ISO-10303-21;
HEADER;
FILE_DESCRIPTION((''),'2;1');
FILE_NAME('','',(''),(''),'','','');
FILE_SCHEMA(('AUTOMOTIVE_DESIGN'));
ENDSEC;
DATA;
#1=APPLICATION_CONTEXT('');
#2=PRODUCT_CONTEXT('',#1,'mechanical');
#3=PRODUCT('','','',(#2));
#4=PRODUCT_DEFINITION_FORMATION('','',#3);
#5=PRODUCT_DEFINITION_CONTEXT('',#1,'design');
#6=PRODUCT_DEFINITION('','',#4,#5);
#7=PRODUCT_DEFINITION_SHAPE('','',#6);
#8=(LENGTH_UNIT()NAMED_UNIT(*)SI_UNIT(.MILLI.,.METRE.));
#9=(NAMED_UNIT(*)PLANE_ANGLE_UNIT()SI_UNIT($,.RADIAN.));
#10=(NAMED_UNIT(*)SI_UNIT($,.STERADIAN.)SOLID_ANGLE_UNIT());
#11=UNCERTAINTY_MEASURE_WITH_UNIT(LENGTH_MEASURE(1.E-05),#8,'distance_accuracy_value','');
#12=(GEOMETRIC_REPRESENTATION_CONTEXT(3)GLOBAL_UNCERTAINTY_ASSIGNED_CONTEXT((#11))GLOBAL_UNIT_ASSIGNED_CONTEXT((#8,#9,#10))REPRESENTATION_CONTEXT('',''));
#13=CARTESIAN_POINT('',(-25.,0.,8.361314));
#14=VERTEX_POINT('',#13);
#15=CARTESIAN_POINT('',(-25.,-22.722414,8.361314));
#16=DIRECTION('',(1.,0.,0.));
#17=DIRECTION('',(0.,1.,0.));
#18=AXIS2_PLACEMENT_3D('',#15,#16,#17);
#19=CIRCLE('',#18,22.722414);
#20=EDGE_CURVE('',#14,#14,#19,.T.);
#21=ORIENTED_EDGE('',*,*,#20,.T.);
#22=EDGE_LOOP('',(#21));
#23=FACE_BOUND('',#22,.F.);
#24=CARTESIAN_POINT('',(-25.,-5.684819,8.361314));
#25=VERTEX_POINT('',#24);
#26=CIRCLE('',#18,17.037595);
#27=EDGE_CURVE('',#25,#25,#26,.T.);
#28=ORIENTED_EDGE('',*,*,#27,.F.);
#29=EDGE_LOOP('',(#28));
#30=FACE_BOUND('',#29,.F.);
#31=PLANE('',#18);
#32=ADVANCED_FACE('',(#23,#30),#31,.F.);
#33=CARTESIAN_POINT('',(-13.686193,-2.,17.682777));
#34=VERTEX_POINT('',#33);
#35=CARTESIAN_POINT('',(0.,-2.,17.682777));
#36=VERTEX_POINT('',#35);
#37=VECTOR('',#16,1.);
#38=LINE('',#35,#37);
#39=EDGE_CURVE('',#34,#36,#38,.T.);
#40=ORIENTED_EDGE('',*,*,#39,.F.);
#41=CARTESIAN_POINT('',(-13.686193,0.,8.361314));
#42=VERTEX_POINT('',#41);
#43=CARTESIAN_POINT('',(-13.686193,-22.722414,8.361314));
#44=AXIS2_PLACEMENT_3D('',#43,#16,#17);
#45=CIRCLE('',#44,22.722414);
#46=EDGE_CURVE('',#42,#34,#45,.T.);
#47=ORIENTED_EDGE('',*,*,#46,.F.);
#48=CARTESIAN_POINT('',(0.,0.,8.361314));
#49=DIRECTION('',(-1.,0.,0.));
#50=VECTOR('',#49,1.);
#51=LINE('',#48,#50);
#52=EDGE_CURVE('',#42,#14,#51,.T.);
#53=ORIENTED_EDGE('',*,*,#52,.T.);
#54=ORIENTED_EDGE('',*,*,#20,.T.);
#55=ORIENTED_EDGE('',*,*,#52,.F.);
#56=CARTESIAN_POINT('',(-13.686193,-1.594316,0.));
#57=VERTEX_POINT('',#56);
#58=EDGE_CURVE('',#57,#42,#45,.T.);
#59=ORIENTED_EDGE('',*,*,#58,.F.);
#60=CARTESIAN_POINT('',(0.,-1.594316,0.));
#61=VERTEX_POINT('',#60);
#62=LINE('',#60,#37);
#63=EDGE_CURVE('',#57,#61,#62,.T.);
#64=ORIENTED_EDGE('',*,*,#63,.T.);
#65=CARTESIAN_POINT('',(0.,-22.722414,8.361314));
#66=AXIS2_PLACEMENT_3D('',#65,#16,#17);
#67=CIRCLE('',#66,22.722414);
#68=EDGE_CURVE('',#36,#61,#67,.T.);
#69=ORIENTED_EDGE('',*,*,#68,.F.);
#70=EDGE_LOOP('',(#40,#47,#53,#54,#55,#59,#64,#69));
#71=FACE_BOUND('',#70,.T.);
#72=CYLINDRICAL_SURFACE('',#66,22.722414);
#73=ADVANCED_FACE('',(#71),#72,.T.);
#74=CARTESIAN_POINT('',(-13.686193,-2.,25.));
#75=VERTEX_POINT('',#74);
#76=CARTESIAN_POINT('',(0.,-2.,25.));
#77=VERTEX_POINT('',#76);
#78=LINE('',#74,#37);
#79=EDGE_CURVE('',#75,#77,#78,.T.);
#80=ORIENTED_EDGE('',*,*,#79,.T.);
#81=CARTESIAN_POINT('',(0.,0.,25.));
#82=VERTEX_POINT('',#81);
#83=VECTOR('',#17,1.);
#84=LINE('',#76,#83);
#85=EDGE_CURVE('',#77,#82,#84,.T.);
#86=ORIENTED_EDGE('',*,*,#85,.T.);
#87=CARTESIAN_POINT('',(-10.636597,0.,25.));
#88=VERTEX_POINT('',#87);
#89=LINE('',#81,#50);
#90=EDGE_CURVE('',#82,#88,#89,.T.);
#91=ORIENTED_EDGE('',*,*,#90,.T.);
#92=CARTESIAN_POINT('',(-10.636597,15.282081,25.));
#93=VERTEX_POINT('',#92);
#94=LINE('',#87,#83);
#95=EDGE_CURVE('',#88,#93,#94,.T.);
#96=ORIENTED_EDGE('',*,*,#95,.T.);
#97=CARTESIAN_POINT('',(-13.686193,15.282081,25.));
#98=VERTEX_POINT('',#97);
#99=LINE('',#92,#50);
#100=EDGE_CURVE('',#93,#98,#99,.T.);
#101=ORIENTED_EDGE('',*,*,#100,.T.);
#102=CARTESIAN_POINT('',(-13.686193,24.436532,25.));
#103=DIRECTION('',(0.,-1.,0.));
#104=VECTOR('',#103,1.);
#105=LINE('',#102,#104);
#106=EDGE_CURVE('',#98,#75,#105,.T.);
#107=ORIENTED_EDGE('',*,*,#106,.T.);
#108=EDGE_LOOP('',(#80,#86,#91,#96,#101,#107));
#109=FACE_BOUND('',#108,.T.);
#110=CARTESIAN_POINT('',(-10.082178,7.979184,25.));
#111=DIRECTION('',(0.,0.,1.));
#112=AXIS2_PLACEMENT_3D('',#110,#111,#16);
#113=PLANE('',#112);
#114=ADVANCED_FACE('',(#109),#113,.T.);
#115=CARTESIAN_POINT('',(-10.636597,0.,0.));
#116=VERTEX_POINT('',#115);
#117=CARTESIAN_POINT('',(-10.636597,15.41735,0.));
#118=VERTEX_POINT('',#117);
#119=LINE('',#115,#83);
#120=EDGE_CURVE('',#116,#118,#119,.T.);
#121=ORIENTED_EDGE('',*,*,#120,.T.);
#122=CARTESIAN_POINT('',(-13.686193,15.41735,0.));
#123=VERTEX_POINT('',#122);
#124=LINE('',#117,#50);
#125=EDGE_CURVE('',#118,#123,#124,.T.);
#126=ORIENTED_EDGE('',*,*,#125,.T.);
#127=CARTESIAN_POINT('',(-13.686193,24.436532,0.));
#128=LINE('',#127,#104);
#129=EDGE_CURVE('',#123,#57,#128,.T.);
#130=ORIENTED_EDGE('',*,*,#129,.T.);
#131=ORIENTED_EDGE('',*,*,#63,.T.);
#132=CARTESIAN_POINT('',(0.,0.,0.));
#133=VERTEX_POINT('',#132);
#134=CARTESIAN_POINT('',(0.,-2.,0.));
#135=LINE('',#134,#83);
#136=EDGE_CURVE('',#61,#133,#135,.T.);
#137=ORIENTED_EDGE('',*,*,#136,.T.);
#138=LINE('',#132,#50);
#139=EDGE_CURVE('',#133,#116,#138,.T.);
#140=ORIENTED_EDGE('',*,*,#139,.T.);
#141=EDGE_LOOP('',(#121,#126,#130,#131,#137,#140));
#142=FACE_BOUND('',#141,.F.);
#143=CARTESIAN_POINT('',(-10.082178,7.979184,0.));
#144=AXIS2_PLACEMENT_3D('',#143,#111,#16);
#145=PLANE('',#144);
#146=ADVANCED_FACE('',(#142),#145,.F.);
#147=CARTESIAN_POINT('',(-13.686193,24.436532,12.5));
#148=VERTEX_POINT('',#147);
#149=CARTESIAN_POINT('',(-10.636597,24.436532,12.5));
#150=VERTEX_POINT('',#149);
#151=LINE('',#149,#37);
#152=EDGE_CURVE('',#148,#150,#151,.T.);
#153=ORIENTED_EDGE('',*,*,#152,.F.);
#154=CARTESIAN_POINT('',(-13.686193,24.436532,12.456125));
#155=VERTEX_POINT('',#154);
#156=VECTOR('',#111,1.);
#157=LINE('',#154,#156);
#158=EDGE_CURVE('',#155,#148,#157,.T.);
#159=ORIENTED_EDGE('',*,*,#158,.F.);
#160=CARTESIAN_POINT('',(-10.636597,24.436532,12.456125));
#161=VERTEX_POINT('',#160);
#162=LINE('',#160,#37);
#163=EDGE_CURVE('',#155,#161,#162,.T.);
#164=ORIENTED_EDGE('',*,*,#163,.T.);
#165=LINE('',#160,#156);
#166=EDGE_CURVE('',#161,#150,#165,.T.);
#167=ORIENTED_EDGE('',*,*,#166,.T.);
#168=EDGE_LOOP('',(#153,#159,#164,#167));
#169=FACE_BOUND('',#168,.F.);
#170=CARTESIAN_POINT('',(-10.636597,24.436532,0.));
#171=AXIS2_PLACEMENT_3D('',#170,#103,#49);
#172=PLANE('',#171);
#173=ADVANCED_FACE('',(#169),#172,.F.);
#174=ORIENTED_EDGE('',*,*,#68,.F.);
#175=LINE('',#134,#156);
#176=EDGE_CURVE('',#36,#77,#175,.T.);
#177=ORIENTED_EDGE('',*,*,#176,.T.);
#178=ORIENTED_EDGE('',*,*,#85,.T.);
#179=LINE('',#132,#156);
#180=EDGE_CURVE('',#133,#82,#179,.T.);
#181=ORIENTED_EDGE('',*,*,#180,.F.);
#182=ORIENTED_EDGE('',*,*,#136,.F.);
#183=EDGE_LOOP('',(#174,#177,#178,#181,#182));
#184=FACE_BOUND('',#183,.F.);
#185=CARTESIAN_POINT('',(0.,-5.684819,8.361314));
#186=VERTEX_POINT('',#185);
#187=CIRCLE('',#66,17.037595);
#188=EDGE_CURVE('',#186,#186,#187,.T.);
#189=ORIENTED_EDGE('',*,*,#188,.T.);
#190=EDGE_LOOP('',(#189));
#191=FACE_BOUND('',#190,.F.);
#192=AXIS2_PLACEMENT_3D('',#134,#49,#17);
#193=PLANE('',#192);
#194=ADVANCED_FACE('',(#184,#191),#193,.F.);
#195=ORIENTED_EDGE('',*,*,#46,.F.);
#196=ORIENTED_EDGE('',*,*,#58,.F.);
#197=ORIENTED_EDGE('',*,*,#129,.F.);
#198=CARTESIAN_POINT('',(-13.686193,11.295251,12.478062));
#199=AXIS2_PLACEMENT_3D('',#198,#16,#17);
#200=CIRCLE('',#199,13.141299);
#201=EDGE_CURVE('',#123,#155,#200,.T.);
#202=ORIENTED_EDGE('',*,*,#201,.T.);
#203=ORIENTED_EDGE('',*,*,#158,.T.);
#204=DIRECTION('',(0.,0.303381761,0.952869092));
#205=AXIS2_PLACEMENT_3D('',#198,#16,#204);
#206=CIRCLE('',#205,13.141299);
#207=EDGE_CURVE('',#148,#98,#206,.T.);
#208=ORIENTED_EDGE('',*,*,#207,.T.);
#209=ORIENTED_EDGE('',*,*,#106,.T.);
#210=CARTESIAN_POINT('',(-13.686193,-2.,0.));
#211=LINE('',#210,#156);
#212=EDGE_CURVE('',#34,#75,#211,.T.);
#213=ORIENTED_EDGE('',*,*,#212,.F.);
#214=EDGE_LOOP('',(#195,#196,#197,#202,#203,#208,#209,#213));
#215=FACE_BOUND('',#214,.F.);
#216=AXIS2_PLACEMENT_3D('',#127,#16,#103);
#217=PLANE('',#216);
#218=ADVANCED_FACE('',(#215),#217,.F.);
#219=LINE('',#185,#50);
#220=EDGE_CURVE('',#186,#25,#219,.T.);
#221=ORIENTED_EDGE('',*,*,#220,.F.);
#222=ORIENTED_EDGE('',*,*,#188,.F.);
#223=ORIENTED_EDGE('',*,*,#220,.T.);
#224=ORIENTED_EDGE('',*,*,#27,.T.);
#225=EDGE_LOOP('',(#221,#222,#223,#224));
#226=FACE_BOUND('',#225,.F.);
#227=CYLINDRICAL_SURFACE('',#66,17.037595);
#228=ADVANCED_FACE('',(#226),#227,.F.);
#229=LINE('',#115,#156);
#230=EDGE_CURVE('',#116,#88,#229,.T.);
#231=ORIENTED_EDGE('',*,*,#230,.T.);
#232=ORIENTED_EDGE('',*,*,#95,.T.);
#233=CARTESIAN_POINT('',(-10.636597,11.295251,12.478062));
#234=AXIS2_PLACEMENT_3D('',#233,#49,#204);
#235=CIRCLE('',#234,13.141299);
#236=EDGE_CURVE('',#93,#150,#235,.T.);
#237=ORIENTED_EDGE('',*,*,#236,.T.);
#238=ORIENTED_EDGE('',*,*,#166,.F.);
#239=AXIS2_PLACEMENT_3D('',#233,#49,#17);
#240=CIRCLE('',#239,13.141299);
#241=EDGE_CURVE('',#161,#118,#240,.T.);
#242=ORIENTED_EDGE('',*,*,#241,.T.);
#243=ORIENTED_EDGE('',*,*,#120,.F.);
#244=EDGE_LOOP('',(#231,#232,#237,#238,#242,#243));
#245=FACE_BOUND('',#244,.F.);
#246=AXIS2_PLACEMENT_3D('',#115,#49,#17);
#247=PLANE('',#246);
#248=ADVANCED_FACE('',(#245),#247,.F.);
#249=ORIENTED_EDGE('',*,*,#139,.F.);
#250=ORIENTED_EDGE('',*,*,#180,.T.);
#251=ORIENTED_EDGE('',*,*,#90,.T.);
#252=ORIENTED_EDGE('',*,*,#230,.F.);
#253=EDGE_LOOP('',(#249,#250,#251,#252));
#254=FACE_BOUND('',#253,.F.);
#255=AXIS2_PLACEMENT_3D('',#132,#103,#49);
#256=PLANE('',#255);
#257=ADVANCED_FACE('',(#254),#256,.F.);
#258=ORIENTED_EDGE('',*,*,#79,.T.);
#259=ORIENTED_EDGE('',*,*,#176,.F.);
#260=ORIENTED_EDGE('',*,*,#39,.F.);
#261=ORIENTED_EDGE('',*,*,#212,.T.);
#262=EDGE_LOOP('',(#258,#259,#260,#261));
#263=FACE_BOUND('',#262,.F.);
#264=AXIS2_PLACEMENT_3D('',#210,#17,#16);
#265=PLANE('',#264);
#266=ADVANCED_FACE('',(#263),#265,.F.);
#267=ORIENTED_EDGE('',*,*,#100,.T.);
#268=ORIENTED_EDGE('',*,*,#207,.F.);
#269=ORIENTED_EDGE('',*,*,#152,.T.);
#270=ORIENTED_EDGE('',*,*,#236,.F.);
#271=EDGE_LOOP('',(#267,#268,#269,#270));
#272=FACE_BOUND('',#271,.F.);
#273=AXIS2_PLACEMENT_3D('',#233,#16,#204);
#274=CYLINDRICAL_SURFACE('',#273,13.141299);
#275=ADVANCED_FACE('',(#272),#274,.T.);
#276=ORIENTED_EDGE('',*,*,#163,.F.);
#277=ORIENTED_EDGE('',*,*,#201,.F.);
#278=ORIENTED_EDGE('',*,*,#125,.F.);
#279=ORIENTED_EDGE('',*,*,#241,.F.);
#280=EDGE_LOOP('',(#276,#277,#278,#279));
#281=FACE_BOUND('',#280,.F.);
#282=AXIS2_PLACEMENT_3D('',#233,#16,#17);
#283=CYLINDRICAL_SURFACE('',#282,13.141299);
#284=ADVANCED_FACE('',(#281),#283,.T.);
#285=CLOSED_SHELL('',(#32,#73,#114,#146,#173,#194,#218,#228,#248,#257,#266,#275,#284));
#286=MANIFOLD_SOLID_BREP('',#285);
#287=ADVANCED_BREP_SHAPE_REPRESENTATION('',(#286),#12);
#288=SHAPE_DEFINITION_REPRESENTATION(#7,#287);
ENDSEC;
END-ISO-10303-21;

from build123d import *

# Parameters (mm, degrees)
F1_DEPTH = 25
F3_DEPTH = 25
F4_R     = 22.7224143994
F4_R_2   = 17.0375954798
F5_DEPTH = 25


# Not quite as in the source:
# - ends of sketch curves that miss each other by under 0.0002 mm in the source are joined


with BuildPart() as f1:
    # F0 (on Top) → F1 (new body)
    with BuildSketch(Plane.XY):
        Polygon((0, 0), (-10.6365969405, 0), (-10.6365969405, 24.4365315884), (-13.6861931533, 24.4365315884), (-13.6861931533, 0), (-13.6861931533, -2), (0, -2), align=None)
    extrude(amount=F1_DEPTH)

    # F2 (on face) → F3 (cut)
    with BuildSketch(Plane.YZ.offset(-10.6365969405)):
        with BuildLine():
            ThreePointArc((24.4365498995, 12.4780622919), (21.9456846424, 4.7798806359), (15.4173501195, 0))
            Line((15.4173501195, 0), (24.4365315884, 0))
            Line((24.4365315884, 0), (24.4365498995, 12.4780622919))
        make_face()
        with BuildLine():
            ThreePointArc((15.2820812933, 25), (21.9038763933, 20.233757287), (24.4365498995, 12.4780622919))
            Line((24.4365498995, 12.4780622919), (24.4365315884, 25))
            Line((24.4365315884, 25), (15.2820812933, 25))
        make_face()
    extrude(amount=-F3_DEPTH, mode=Mode.SUBTRACT)

    # F4 (on Right) → F5 (join)
    with BuildSketch(Plane.YZ):
        with Locations((-22.7224143994, 8.3613144234)):
            Circle(F4_R)
        with Locations((-22.7224143994, 8.3613144234)):
            Circle(F4_R_2, mode=Mode.SUBTRACT)
    extrude(amount=-F5_DEPTH)


solid = f1.part
